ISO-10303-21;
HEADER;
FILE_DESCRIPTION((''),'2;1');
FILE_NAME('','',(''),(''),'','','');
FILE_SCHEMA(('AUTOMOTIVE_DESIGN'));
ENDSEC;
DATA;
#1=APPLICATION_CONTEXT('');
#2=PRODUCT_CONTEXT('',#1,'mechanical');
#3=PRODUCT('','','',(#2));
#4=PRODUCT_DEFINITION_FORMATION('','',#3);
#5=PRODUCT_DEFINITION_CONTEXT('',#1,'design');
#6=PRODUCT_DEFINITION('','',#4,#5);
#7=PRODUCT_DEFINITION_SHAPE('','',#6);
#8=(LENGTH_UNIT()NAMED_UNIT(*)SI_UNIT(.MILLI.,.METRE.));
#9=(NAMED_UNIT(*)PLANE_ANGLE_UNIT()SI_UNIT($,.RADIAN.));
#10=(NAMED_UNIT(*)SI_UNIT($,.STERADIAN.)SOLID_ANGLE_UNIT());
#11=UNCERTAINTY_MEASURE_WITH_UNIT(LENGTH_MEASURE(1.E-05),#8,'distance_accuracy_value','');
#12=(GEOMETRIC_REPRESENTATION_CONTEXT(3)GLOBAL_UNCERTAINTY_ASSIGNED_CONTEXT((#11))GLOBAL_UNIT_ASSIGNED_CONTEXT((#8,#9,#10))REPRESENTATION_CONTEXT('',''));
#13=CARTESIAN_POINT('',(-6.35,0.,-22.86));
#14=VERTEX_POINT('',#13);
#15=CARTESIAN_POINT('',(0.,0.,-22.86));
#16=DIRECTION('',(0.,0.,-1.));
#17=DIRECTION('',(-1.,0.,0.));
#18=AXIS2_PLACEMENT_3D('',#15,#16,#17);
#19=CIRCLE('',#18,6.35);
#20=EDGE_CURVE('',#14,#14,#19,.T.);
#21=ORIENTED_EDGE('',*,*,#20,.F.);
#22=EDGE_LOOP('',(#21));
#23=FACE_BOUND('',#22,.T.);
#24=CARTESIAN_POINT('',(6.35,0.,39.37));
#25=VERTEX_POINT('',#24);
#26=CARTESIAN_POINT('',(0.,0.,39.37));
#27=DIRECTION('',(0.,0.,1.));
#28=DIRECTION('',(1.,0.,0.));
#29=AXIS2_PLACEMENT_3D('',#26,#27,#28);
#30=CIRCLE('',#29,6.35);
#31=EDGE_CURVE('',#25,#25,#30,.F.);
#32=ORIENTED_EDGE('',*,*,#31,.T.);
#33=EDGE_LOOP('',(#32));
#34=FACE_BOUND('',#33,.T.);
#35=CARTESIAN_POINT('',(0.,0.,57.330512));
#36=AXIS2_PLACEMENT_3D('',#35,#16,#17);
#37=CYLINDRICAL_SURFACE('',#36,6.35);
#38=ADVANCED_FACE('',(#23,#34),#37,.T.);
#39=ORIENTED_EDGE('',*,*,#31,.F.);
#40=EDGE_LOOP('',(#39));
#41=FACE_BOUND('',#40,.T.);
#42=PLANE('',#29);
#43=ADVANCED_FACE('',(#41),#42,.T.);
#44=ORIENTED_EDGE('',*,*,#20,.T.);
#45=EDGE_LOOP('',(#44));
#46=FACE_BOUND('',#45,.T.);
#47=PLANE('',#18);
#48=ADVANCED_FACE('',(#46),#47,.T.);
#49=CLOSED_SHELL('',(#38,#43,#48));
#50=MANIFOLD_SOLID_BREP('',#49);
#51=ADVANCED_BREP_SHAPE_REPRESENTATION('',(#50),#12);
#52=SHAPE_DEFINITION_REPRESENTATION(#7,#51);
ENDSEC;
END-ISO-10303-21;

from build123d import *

# Parameters (mm, degrees)
BOSS_EXTRUDE1_START     = -62.23
BOSS_EXTRUDE1_OUTLINE_R = 6.35
BOSS_EXTRUDE1_DEPTH     = 62.23


# Read off the part's stored shape, not the designer's step: Boss-Extrude1
with BuildPart() as part:
    # Boss-Extrude1 outline → Boss-Extrude1 (new body)
    with BuildSketch(Plane(origin=(0, 0, -22.86), x_dir=(-1, 0, 0), z_dir=(0, 0, -1)).offset(BOSS_EXTRUDE1_START)):
        Circle(BOSS_EXTRUDE1_OUTLINE_R)
    extrude(amount=BOSS_EXTRUDE1_DEPTH)


solid = part.part
